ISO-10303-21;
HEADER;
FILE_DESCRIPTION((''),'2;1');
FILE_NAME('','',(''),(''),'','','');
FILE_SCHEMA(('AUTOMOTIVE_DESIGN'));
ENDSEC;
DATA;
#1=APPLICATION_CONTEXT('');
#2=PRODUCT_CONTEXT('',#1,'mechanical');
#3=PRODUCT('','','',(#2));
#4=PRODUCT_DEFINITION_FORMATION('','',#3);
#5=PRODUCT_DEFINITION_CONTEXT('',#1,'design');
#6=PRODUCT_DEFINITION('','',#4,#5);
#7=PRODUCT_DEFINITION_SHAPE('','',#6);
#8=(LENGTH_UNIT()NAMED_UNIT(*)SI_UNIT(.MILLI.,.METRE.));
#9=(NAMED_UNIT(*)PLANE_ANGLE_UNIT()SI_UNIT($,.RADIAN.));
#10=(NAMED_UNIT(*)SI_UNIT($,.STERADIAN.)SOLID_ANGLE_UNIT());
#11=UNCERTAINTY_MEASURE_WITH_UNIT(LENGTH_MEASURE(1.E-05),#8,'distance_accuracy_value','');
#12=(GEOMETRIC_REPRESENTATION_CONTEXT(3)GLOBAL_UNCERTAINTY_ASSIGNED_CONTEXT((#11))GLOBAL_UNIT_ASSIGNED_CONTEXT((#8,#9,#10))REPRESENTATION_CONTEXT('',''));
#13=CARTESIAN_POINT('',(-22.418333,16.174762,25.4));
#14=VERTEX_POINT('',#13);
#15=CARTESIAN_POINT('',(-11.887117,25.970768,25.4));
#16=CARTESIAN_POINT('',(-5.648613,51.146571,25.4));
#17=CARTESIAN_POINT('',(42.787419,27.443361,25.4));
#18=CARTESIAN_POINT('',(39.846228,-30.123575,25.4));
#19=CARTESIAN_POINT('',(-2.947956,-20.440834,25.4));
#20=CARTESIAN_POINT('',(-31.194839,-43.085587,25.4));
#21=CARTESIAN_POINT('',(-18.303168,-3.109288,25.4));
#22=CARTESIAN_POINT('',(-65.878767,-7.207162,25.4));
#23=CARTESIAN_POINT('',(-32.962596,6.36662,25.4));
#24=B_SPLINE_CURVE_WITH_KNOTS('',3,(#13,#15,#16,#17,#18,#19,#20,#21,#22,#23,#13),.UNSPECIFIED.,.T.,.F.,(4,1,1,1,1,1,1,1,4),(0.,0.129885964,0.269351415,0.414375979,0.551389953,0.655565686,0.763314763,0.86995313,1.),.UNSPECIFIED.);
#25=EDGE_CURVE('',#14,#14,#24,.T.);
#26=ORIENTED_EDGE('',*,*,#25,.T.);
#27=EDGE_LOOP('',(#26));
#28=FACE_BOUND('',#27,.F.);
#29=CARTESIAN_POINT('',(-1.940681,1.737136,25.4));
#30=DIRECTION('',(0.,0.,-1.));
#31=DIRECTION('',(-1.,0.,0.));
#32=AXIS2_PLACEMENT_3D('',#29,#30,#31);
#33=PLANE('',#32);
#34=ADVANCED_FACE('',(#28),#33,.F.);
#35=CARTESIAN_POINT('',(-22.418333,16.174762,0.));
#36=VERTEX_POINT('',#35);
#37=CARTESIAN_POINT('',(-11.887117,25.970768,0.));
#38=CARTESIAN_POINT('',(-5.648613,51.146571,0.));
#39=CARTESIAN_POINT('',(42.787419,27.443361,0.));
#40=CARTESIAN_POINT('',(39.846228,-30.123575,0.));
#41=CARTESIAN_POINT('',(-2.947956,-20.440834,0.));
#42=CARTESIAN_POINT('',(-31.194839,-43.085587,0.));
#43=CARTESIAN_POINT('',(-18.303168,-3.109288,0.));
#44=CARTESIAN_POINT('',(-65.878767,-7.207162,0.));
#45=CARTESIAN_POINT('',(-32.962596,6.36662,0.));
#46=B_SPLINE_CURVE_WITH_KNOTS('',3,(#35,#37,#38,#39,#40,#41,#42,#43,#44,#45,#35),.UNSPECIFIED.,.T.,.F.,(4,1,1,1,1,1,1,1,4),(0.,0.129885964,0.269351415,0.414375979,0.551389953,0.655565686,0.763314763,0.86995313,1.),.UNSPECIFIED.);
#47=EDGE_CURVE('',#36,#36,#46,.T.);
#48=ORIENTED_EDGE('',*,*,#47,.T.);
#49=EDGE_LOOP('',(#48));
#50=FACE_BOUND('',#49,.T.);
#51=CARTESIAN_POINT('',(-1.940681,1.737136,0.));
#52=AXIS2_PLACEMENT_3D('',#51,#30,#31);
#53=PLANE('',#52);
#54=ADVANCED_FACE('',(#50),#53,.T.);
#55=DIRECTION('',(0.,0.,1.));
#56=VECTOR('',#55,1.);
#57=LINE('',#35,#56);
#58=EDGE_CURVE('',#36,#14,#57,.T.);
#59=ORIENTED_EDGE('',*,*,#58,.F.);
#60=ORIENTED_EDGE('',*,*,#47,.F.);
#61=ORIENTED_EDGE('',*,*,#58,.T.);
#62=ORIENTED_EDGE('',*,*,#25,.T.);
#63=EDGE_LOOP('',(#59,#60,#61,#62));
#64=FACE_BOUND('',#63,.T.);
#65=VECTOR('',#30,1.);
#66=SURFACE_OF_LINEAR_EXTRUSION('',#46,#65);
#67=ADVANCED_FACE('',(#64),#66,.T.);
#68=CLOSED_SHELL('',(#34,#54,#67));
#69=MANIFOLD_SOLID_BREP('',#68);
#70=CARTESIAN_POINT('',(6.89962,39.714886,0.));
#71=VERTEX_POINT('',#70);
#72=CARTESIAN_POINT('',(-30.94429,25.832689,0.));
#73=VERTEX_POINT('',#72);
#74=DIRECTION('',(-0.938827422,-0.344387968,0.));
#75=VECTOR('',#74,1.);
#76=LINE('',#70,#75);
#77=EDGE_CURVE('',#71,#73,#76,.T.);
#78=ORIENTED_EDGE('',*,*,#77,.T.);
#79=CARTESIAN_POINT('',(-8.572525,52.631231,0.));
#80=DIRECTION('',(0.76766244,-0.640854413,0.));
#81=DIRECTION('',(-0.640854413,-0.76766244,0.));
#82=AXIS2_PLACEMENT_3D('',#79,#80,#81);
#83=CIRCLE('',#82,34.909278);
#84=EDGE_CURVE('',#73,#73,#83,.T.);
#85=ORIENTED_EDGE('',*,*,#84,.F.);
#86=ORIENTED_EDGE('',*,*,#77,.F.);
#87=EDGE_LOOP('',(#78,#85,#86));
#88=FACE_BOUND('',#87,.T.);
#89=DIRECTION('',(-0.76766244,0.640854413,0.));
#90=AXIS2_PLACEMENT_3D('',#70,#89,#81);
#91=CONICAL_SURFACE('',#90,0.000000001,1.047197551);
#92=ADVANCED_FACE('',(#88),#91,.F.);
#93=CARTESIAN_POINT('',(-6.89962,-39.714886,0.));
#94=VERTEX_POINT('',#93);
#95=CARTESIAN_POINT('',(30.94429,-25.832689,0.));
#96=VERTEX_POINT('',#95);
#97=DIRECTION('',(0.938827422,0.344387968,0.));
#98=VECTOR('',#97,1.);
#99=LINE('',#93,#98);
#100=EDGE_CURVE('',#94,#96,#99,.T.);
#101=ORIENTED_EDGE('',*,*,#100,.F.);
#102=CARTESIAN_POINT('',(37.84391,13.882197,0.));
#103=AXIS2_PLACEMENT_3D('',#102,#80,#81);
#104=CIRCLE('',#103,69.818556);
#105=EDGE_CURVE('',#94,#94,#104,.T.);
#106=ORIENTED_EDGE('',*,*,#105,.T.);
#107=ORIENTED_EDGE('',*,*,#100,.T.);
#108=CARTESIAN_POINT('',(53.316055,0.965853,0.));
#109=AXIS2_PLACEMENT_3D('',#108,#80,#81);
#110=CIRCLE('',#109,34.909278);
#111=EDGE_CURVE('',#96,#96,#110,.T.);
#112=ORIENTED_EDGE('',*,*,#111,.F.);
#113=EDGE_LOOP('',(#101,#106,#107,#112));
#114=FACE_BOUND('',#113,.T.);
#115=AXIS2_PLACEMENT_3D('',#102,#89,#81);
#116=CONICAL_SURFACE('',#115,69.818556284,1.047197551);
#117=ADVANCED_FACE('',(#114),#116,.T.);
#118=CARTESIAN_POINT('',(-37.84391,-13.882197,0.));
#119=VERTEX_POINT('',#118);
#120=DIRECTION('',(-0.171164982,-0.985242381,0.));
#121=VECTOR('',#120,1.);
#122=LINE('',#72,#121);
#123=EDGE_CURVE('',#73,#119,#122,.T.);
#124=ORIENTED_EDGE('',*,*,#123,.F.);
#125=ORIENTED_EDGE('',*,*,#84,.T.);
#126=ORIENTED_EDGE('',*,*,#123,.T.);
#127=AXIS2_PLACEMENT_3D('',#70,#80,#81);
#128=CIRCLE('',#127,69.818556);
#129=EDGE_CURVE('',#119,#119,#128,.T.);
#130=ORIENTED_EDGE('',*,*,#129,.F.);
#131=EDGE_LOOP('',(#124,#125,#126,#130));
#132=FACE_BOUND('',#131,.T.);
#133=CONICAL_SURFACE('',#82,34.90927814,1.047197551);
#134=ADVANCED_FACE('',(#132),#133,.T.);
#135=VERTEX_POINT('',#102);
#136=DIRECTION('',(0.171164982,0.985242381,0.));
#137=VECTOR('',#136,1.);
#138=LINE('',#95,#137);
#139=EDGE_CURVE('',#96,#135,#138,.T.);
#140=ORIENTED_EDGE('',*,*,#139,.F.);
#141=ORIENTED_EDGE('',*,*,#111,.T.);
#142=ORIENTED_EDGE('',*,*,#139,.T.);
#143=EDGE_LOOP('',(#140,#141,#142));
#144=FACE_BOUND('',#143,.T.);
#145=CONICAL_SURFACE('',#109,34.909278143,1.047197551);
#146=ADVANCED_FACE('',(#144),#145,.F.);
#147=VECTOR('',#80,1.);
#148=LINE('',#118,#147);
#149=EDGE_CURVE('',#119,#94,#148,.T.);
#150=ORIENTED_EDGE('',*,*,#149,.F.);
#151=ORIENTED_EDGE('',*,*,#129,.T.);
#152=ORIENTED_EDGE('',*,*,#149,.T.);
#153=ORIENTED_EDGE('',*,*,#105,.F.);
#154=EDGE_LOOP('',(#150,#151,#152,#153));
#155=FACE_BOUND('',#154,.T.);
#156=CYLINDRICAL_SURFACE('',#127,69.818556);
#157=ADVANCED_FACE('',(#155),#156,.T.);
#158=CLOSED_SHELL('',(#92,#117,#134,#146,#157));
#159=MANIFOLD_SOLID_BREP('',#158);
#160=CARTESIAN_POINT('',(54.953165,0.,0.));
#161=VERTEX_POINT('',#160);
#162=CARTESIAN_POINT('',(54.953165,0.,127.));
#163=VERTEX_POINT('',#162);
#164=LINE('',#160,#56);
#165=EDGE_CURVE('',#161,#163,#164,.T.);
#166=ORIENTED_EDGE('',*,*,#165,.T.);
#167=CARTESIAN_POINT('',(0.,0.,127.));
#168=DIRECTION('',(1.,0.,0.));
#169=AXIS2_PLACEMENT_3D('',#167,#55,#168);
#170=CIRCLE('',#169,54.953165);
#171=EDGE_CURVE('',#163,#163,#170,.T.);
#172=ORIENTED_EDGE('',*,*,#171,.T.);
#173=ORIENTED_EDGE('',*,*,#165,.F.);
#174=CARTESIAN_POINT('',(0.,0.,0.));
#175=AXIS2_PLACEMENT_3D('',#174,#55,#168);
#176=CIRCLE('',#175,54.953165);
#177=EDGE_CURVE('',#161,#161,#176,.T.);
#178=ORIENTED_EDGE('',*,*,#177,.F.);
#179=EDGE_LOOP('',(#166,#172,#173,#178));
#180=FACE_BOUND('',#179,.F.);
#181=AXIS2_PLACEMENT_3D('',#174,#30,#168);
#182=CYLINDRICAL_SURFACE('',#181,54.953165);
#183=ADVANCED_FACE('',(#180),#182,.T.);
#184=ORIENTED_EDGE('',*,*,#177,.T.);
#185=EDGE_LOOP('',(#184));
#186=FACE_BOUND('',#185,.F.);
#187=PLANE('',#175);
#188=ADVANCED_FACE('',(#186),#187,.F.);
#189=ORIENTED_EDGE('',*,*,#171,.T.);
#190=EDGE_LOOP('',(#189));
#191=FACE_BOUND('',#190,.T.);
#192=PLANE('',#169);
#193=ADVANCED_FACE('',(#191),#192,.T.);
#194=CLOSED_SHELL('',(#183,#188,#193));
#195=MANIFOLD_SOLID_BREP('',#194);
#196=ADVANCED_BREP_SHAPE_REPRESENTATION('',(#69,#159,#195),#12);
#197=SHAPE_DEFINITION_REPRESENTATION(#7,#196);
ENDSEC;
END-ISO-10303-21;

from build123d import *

# Parameters (mm, degrees)
F0_R     = 54.9531653684
F1_DEPTH = 127
F7_DEPTH = 25.4


# Not quite as in the source:
# - a feature of the source that left no trace in its solid (it failed there, or was rolled back) is left out
# - the program builds the solid bodies; features that only make, move or delete a surface that nothing else refers to are left out


with BuildPart() as f1:
    # F0 (on Top) → F1 (new body)
    with BuildSketch(Plane.XY):
        Circle(F0_R)
    extrude(amount=F1_DEPTH)


with BuildPart() as f3:
    # F2 (on Top) → F3 (revolve)
    with BuildSketch(Plane.XY):
        Polygon((30.9442904428, -25.8326890354), (37.8439101741, 13.8821971078), (6.8996197313, 39.7148861432), (-30.9442904428, 25.8326890354), (-37.8439101741, -13.8821971078), (-6.8996197313, -39.7148861432), align=None)
    revolve(axis=Axis((22.3717649527, 26.7985416255, 0), (0.7676624397, -0.640854413, 0)))


with BuildPart() as f7:
    # F6 (on Top) → F7 (new body)
    with BuildSketch(Plane.XY):
        with BuildLine():
            add(Edge.make_bspline(
                [(-22.4183332175, 16.1747615784), (-11.8871169461, 25.9707679053), (-5.6486125726, 51.1465707181), (42.7874188306, 27.4433614183), (39.8462276715, -30.123574606), (-2.9479560075, -20.4408335204), (-31.1948387365, -43.0855866328), (-18.3031677908, -3.1092882088), (-65.8787672835, -7.2071620203), (-32.9625958172, 6.3666197193), (-22.4183332175, 16.1747615784)],
                knots=[0, 0, 0, 0, 0.1298859642, 0.2693514147, 0.414375979, 0.5513899534, 0.6555656862, 0.7633147629, 0.8699531299, 1, 1, 1, 1], degree=3))
        make_face()
    extrude(amount=F7_DEPTH)


solid = Compound([f1.part, f3.part, f7.part])
